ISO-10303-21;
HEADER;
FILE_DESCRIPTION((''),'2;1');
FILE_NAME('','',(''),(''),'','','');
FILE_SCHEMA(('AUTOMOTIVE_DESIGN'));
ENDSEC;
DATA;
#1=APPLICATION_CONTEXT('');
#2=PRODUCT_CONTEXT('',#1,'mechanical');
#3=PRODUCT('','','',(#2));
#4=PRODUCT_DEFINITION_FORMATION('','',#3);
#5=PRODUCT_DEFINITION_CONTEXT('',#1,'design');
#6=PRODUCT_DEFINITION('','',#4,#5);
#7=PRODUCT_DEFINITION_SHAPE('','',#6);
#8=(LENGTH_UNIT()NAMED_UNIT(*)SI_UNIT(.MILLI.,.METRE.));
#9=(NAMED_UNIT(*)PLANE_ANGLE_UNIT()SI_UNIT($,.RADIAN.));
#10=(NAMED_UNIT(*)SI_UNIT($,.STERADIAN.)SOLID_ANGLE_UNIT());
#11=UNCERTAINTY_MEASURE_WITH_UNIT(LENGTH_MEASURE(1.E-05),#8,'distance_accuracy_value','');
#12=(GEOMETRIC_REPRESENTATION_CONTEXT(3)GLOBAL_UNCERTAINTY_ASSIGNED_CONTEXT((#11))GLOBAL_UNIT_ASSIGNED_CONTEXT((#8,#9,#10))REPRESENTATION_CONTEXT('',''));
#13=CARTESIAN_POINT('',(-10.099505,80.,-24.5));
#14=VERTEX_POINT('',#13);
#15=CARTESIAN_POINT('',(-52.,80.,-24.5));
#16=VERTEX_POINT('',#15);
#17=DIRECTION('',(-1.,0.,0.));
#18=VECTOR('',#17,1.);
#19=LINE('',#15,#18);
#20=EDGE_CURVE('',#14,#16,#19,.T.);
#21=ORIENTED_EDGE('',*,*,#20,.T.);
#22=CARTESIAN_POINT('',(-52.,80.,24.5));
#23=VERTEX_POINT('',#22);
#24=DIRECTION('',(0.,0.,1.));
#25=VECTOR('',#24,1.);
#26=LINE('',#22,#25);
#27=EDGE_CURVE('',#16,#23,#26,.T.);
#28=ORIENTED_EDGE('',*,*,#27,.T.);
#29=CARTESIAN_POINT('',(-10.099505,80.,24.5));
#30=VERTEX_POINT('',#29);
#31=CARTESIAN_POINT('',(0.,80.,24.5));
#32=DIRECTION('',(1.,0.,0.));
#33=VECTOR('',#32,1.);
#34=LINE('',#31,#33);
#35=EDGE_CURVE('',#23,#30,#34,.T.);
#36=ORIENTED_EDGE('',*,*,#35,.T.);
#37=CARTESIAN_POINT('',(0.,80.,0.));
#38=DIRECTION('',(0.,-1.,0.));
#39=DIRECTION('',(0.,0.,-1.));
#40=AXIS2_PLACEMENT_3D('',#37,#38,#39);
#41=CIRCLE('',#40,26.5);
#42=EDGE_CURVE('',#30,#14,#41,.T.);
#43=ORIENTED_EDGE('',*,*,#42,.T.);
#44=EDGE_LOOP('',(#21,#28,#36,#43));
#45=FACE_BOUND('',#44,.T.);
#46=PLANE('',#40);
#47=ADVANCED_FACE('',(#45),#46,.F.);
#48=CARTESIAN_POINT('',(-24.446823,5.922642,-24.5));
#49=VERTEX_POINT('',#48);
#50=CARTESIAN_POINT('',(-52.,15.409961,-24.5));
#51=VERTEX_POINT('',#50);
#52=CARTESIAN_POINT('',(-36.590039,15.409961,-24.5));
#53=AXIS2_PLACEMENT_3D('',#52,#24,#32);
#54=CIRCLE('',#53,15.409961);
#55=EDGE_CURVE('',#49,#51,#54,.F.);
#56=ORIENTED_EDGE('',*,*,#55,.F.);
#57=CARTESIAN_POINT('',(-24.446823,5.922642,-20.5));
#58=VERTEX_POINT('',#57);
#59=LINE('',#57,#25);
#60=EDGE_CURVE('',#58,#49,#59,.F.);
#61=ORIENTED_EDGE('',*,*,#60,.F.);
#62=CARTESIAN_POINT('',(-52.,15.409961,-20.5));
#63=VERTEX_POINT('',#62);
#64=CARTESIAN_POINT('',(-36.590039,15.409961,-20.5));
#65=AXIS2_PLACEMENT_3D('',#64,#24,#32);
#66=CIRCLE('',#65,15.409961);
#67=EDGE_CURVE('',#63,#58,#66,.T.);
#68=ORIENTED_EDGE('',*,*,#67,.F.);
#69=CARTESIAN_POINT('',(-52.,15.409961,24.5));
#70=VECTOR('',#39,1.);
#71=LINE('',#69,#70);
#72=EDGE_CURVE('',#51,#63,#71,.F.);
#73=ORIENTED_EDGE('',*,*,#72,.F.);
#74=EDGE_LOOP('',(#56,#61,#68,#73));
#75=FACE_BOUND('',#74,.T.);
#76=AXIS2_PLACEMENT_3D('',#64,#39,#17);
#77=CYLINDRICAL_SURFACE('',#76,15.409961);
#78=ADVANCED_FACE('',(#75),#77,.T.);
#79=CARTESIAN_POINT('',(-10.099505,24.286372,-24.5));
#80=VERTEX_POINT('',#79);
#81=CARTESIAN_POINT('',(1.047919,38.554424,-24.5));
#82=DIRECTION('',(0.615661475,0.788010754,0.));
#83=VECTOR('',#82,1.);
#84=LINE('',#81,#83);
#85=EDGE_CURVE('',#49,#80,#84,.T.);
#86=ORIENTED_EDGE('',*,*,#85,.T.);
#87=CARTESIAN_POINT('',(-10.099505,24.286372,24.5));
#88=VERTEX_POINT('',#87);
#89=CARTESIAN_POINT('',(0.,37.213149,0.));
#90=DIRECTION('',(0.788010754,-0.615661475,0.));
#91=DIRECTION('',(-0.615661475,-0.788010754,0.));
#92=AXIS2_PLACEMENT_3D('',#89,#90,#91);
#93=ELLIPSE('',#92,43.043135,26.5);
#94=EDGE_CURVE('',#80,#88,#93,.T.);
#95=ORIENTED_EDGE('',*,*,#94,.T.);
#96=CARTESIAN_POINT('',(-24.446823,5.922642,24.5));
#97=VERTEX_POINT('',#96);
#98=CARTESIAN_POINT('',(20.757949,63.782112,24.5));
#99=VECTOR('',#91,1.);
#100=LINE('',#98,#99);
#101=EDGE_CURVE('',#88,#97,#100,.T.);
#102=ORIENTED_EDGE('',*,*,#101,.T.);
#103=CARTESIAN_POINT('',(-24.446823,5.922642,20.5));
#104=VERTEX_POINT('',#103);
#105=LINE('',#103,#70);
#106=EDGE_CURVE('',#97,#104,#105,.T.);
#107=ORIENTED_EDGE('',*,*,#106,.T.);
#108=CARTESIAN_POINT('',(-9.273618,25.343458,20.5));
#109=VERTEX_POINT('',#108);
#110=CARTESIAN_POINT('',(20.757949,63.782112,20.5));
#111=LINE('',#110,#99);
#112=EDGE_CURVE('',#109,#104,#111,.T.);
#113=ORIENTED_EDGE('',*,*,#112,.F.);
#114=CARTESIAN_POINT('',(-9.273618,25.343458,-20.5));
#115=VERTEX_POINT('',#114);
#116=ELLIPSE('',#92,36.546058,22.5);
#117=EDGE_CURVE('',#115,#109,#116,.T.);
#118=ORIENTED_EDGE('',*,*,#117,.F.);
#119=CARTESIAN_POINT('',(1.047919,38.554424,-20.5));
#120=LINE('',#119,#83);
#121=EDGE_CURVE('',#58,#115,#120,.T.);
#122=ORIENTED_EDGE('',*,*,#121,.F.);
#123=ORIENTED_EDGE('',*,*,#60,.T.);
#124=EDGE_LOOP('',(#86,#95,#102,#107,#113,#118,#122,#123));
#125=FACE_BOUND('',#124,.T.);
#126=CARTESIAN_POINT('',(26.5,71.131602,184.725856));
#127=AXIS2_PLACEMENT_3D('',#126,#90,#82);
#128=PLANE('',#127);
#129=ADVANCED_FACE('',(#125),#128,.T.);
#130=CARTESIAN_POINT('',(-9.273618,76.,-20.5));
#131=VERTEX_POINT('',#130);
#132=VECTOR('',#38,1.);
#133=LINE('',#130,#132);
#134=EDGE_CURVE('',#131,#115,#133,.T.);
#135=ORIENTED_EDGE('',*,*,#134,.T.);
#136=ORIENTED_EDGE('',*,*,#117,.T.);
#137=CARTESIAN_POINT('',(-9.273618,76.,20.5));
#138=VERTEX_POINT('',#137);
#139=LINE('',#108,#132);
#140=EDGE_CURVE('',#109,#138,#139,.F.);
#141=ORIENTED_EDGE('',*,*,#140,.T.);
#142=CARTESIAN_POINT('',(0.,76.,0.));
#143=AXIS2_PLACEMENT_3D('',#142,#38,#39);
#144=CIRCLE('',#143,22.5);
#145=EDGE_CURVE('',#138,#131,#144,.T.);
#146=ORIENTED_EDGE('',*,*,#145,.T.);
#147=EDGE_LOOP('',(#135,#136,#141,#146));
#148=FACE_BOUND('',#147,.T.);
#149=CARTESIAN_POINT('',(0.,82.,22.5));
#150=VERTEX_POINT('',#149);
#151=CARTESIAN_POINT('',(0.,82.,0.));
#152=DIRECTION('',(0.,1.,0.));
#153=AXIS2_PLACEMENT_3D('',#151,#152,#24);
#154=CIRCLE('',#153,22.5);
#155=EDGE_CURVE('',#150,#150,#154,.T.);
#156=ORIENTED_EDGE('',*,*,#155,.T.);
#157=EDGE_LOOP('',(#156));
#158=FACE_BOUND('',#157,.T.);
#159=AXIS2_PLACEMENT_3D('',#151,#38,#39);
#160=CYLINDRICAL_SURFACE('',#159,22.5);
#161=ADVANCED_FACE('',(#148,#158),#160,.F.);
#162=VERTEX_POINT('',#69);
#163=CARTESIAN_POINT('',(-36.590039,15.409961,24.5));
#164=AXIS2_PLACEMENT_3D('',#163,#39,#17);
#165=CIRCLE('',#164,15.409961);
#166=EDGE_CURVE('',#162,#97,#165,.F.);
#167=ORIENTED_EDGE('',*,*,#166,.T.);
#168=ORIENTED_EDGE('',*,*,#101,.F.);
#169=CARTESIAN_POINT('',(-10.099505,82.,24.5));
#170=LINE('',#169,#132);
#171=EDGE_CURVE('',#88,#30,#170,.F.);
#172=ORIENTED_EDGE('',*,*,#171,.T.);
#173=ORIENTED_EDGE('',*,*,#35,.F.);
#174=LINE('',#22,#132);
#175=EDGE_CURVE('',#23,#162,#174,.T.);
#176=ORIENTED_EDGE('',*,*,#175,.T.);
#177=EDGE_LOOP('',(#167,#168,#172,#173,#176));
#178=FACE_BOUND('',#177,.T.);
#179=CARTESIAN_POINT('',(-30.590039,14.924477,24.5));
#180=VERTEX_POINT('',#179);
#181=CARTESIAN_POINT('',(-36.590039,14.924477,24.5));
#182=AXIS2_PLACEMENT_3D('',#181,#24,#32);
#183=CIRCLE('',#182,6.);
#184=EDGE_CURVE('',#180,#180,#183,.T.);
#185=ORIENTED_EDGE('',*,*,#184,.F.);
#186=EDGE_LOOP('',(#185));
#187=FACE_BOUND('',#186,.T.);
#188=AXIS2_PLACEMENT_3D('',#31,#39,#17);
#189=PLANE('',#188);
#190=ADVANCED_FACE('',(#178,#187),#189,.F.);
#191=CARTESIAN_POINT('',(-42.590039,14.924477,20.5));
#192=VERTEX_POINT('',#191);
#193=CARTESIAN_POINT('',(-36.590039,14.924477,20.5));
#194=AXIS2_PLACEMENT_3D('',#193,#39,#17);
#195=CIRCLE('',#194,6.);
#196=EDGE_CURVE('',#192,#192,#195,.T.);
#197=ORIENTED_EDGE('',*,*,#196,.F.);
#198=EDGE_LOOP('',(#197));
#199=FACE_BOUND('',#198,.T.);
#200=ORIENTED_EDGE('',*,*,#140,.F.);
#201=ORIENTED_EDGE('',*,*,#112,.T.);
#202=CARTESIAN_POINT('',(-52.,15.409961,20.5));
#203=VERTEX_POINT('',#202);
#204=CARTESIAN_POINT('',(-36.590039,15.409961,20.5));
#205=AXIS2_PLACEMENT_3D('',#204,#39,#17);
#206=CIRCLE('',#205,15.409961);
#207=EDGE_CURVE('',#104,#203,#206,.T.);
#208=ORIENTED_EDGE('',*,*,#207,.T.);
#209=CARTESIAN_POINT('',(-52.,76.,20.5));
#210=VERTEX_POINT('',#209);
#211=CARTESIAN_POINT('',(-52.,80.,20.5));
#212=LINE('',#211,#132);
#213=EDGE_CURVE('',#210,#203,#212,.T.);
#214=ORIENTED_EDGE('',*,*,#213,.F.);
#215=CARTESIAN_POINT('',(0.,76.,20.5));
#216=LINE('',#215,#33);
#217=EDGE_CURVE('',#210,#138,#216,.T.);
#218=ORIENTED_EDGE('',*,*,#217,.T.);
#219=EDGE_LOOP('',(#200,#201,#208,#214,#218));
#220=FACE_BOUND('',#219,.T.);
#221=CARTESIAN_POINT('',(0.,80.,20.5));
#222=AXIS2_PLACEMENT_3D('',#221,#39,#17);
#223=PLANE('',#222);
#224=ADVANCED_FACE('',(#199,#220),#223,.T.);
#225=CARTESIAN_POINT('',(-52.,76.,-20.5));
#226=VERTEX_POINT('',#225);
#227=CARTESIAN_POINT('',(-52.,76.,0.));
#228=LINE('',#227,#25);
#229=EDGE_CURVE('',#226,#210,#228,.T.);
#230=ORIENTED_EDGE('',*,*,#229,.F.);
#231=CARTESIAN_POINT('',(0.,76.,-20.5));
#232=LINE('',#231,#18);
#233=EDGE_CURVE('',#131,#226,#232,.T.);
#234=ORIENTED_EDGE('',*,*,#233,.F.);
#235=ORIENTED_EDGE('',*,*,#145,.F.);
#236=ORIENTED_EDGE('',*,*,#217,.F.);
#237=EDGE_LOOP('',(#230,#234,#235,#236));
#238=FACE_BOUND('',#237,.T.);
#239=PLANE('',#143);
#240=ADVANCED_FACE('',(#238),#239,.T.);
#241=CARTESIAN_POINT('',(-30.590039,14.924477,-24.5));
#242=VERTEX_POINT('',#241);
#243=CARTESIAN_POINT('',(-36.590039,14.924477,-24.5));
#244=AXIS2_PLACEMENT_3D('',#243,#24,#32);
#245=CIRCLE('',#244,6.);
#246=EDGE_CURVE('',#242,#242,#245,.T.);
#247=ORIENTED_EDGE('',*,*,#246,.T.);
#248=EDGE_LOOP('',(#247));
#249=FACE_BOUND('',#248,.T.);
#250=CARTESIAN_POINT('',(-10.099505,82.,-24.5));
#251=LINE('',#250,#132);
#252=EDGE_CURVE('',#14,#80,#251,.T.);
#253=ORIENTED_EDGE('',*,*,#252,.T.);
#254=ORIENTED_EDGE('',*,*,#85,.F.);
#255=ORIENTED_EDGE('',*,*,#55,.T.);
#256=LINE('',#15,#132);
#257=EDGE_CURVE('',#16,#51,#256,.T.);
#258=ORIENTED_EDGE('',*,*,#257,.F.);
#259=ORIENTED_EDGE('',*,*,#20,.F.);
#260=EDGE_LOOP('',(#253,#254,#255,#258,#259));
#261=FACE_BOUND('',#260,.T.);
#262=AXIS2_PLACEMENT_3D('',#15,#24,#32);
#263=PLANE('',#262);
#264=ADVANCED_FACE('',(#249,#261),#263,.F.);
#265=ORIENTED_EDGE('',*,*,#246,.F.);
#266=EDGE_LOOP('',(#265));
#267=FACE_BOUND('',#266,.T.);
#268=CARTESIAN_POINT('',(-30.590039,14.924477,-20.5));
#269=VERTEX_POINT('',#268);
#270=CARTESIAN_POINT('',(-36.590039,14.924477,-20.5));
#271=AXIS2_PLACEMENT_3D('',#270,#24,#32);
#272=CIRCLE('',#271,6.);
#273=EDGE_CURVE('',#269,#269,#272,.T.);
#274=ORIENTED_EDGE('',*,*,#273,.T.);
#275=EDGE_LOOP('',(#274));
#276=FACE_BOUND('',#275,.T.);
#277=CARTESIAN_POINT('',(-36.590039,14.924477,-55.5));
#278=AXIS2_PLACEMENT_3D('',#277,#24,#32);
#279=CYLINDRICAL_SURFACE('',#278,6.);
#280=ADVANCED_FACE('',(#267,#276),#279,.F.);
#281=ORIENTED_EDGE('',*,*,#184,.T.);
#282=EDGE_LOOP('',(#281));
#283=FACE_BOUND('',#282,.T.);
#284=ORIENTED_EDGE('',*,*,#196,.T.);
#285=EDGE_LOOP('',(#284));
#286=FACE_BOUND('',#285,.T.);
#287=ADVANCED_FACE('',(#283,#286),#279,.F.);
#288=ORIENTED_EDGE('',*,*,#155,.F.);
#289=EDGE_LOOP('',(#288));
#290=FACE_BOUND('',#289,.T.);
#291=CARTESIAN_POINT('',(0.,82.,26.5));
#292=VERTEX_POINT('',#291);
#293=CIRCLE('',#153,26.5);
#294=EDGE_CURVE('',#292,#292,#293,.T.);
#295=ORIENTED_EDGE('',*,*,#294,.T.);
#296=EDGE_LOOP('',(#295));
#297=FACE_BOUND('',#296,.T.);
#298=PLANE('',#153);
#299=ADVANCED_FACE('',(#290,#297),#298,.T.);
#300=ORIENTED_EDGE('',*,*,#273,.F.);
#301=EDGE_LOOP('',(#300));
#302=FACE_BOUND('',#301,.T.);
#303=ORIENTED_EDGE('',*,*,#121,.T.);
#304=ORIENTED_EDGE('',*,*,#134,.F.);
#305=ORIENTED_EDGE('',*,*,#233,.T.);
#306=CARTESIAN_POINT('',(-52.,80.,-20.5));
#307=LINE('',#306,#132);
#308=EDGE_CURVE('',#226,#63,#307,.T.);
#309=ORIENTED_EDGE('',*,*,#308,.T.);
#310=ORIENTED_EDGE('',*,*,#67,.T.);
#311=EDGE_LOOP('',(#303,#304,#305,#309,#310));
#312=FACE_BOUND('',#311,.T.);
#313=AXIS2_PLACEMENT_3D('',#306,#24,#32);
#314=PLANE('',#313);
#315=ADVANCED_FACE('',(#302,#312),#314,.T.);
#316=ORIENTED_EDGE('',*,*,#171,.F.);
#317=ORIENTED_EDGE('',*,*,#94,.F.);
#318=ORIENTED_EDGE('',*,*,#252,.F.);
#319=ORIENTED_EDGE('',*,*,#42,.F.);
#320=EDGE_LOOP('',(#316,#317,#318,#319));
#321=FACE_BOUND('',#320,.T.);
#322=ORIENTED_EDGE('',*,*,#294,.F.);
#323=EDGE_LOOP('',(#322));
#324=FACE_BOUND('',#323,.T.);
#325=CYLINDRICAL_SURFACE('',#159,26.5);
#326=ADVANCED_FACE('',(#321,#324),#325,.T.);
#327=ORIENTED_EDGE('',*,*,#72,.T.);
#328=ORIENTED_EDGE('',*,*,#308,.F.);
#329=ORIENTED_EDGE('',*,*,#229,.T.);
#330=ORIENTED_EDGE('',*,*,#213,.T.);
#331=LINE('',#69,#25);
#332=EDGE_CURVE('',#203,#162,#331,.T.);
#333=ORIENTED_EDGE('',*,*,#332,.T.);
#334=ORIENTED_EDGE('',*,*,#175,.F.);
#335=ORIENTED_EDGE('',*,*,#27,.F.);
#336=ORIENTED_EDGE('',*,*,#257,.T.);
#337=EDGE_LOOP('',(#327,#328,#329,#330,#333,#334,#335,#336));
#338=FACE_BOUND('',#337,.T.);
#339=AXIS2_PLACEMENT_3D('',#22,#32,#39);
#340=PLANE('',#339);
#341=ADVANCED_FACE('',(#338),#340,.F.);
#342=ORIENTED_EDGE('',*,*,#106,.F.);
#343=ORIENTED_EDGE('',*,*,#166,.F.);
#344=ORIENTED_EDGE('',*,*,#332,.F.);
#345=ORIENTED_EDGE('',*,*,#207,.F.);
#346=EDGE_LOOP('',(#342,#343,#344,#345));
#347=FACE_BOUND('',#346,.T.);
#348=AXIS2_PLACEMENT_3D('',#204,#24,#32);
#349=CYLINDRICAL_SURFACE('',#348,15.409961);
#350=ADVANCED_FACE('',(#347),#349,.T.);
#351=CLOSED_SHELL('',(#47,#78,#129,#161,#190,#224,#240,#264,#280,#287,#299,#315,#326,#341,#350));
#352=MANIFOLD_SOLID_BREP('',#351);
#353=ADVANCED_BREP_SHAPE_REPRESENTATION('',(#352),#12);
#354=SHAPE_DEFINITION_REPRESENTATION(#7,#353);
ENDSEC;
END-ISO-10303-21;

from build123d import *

# Parameters (mm, degrees)
SKETCH1_R               = 26.5
SKETCH1_R_2             = 22.5
BOSS_EXTRUDE1_DEPTH     = 82
SKETCH3_W               = 52
SKETCH3_H               = 49
BOSS_EXTRUDE2_DEPTH     = 80
CUT_EXTRUDE1_DEPTH      = 101.649143066
CUT_EXTRUDE1_DEPTH_BACK = 101.649143066
SHELL1_DEPTH            = 76
CUT_EXTRUDE2_START      = -80
CUT_EXTRUDE2_DEPTH      = 80
FILLET1_R               = 15.409961
FILLET2_R               = 15.409961
SKETCH6_R               = 6
CUT_EXTRUDE3_DEPTH      = 80


# Read off the part's stored shape, not the designer's step: Shell1
with BuildPart() as part:
    # Sketch1 → Boss-Extrude1 (new body)
    with BuildSketch(Plane(origin=(0, 0, 0), x_dir=(1, 0, 0), z_dir=(0, 1, 0))):
        with Locations(Location((0, 0, 0), (0, 0, 270))):
            Circle(SKETCH1_R)
        with Locations(Location((0, 0, 0), (0, 0, 270))):
            Circle(SKETCH1_R_2, mode=Mode.SUBTRACT)
    extrude(amount=BOSS_EXTRUDE1_DEPTH)

    # Sketch3 → Boss-Extrude2 (add)
    with BuildSketch(Plane(origin=(0, 0, 0), x_dir=(1, 0, 0), z_dir=(0, 1, 0))):
        with Locations((-26, 0)):
            Rectangle(SKETCH3_W, SKETCH3_H)
    extrude(amount=BOSS_EXTRUDE2_DEPTH)

    # Sketch4 → Cut-Extrude1 (cut, two sides: drawn at the far end of the back side and taken through both)
    with BuildSketch(Plane.XY.offset(-CUT_EXTRUDE1_DEPTH_BACK)):
        Polygon((163.095245714, 245.965543737), (26.5, 71.131601988), (-29.074098223, 0), (-165.669343938, -174.833941749), (183.998539561, -448.024433177), (512.763129212, -27.224947691), align=None)
    extrude(amount=CUT_EXTRUDE1_DEPTH + CUT_EXTRUDE1_DEPTH_BACK, mode=Mode.SUBTRACT)

    # Shell1 outline → Shell1 (cut)
    with BuildSketch(Plane(origin=(0, 0, 0), x_dir=(1, 0, 0), z_dir=(0, 1, 0))):
        with BuildLine():
            ThreePointArc((-9.273618496, -20.5), (-6.687371777, -21.483227381), (-4, -22.141589825))
            Line((-4, -22.141589825), (-4, 22.141589825))
            ThreePointArc((-4, 22.141589825), (-6.687371776, 21.483227381), (-9.273618495, 20.5))
            Line((-9.273618495, 20.5), (-52, 20.5))
            Line((-52, 20.5), (-52, -20.5))
            Line((-52, -20.5), (-9.273618496, -20.5))
        make_face()
    extrude(amount=SHELL1_DEPTH, mode=Mode.SUBTRACT)

    # Sketch5 → Cut-Extrude2 (cut)
    with BuildSketch(Plane(origin=(0, 80, 0), x_dir=(1, 0, 0), z_dir=(0, 1, 0)).offset(CUT_EXTRUDE2_START)):
        with BuildLine():
            Line((0, -22.5), (0, 22.5))
            ThreePointArc((0, 22.5), (-22.5, 0), (0, -22.5))
        make_face()
    extrude(amount=CUT_EXTRUDE2_DEPTH, mode=Mode.SUBTRACT)

    # Fillet1
    fillet1_edges = [part.edges().sort_by_distance(p)[0] for p in [
        (-52, 0, -22.5),
        (-29.074098223, 0, -22.5),
    ]]
    fillet(fillet1_edges, radius=FILLET1_R)

    # Fillet2
    fillet2_edges = [part.edges().sort_by_distance(p)[0] for p in [
        (-29.074098223, 0, 22.5),
        (-52, 0, 22.5),
    ]]
    fillet(fillet2_edges, radius=FILLET2_R)

    # Sketch6 → Cut-Extrude3 (cut)
    with BuildSketch(Plane.XY.offset(24.5)):
        with Locations((-36.590038591, 14.924477303)):
            Circle(SKETCH6_R)
    extrude(amount=-CUT_EXTRUDE3_DEPTH, mode=Mode.SUBTRACT)


solid = part.part
